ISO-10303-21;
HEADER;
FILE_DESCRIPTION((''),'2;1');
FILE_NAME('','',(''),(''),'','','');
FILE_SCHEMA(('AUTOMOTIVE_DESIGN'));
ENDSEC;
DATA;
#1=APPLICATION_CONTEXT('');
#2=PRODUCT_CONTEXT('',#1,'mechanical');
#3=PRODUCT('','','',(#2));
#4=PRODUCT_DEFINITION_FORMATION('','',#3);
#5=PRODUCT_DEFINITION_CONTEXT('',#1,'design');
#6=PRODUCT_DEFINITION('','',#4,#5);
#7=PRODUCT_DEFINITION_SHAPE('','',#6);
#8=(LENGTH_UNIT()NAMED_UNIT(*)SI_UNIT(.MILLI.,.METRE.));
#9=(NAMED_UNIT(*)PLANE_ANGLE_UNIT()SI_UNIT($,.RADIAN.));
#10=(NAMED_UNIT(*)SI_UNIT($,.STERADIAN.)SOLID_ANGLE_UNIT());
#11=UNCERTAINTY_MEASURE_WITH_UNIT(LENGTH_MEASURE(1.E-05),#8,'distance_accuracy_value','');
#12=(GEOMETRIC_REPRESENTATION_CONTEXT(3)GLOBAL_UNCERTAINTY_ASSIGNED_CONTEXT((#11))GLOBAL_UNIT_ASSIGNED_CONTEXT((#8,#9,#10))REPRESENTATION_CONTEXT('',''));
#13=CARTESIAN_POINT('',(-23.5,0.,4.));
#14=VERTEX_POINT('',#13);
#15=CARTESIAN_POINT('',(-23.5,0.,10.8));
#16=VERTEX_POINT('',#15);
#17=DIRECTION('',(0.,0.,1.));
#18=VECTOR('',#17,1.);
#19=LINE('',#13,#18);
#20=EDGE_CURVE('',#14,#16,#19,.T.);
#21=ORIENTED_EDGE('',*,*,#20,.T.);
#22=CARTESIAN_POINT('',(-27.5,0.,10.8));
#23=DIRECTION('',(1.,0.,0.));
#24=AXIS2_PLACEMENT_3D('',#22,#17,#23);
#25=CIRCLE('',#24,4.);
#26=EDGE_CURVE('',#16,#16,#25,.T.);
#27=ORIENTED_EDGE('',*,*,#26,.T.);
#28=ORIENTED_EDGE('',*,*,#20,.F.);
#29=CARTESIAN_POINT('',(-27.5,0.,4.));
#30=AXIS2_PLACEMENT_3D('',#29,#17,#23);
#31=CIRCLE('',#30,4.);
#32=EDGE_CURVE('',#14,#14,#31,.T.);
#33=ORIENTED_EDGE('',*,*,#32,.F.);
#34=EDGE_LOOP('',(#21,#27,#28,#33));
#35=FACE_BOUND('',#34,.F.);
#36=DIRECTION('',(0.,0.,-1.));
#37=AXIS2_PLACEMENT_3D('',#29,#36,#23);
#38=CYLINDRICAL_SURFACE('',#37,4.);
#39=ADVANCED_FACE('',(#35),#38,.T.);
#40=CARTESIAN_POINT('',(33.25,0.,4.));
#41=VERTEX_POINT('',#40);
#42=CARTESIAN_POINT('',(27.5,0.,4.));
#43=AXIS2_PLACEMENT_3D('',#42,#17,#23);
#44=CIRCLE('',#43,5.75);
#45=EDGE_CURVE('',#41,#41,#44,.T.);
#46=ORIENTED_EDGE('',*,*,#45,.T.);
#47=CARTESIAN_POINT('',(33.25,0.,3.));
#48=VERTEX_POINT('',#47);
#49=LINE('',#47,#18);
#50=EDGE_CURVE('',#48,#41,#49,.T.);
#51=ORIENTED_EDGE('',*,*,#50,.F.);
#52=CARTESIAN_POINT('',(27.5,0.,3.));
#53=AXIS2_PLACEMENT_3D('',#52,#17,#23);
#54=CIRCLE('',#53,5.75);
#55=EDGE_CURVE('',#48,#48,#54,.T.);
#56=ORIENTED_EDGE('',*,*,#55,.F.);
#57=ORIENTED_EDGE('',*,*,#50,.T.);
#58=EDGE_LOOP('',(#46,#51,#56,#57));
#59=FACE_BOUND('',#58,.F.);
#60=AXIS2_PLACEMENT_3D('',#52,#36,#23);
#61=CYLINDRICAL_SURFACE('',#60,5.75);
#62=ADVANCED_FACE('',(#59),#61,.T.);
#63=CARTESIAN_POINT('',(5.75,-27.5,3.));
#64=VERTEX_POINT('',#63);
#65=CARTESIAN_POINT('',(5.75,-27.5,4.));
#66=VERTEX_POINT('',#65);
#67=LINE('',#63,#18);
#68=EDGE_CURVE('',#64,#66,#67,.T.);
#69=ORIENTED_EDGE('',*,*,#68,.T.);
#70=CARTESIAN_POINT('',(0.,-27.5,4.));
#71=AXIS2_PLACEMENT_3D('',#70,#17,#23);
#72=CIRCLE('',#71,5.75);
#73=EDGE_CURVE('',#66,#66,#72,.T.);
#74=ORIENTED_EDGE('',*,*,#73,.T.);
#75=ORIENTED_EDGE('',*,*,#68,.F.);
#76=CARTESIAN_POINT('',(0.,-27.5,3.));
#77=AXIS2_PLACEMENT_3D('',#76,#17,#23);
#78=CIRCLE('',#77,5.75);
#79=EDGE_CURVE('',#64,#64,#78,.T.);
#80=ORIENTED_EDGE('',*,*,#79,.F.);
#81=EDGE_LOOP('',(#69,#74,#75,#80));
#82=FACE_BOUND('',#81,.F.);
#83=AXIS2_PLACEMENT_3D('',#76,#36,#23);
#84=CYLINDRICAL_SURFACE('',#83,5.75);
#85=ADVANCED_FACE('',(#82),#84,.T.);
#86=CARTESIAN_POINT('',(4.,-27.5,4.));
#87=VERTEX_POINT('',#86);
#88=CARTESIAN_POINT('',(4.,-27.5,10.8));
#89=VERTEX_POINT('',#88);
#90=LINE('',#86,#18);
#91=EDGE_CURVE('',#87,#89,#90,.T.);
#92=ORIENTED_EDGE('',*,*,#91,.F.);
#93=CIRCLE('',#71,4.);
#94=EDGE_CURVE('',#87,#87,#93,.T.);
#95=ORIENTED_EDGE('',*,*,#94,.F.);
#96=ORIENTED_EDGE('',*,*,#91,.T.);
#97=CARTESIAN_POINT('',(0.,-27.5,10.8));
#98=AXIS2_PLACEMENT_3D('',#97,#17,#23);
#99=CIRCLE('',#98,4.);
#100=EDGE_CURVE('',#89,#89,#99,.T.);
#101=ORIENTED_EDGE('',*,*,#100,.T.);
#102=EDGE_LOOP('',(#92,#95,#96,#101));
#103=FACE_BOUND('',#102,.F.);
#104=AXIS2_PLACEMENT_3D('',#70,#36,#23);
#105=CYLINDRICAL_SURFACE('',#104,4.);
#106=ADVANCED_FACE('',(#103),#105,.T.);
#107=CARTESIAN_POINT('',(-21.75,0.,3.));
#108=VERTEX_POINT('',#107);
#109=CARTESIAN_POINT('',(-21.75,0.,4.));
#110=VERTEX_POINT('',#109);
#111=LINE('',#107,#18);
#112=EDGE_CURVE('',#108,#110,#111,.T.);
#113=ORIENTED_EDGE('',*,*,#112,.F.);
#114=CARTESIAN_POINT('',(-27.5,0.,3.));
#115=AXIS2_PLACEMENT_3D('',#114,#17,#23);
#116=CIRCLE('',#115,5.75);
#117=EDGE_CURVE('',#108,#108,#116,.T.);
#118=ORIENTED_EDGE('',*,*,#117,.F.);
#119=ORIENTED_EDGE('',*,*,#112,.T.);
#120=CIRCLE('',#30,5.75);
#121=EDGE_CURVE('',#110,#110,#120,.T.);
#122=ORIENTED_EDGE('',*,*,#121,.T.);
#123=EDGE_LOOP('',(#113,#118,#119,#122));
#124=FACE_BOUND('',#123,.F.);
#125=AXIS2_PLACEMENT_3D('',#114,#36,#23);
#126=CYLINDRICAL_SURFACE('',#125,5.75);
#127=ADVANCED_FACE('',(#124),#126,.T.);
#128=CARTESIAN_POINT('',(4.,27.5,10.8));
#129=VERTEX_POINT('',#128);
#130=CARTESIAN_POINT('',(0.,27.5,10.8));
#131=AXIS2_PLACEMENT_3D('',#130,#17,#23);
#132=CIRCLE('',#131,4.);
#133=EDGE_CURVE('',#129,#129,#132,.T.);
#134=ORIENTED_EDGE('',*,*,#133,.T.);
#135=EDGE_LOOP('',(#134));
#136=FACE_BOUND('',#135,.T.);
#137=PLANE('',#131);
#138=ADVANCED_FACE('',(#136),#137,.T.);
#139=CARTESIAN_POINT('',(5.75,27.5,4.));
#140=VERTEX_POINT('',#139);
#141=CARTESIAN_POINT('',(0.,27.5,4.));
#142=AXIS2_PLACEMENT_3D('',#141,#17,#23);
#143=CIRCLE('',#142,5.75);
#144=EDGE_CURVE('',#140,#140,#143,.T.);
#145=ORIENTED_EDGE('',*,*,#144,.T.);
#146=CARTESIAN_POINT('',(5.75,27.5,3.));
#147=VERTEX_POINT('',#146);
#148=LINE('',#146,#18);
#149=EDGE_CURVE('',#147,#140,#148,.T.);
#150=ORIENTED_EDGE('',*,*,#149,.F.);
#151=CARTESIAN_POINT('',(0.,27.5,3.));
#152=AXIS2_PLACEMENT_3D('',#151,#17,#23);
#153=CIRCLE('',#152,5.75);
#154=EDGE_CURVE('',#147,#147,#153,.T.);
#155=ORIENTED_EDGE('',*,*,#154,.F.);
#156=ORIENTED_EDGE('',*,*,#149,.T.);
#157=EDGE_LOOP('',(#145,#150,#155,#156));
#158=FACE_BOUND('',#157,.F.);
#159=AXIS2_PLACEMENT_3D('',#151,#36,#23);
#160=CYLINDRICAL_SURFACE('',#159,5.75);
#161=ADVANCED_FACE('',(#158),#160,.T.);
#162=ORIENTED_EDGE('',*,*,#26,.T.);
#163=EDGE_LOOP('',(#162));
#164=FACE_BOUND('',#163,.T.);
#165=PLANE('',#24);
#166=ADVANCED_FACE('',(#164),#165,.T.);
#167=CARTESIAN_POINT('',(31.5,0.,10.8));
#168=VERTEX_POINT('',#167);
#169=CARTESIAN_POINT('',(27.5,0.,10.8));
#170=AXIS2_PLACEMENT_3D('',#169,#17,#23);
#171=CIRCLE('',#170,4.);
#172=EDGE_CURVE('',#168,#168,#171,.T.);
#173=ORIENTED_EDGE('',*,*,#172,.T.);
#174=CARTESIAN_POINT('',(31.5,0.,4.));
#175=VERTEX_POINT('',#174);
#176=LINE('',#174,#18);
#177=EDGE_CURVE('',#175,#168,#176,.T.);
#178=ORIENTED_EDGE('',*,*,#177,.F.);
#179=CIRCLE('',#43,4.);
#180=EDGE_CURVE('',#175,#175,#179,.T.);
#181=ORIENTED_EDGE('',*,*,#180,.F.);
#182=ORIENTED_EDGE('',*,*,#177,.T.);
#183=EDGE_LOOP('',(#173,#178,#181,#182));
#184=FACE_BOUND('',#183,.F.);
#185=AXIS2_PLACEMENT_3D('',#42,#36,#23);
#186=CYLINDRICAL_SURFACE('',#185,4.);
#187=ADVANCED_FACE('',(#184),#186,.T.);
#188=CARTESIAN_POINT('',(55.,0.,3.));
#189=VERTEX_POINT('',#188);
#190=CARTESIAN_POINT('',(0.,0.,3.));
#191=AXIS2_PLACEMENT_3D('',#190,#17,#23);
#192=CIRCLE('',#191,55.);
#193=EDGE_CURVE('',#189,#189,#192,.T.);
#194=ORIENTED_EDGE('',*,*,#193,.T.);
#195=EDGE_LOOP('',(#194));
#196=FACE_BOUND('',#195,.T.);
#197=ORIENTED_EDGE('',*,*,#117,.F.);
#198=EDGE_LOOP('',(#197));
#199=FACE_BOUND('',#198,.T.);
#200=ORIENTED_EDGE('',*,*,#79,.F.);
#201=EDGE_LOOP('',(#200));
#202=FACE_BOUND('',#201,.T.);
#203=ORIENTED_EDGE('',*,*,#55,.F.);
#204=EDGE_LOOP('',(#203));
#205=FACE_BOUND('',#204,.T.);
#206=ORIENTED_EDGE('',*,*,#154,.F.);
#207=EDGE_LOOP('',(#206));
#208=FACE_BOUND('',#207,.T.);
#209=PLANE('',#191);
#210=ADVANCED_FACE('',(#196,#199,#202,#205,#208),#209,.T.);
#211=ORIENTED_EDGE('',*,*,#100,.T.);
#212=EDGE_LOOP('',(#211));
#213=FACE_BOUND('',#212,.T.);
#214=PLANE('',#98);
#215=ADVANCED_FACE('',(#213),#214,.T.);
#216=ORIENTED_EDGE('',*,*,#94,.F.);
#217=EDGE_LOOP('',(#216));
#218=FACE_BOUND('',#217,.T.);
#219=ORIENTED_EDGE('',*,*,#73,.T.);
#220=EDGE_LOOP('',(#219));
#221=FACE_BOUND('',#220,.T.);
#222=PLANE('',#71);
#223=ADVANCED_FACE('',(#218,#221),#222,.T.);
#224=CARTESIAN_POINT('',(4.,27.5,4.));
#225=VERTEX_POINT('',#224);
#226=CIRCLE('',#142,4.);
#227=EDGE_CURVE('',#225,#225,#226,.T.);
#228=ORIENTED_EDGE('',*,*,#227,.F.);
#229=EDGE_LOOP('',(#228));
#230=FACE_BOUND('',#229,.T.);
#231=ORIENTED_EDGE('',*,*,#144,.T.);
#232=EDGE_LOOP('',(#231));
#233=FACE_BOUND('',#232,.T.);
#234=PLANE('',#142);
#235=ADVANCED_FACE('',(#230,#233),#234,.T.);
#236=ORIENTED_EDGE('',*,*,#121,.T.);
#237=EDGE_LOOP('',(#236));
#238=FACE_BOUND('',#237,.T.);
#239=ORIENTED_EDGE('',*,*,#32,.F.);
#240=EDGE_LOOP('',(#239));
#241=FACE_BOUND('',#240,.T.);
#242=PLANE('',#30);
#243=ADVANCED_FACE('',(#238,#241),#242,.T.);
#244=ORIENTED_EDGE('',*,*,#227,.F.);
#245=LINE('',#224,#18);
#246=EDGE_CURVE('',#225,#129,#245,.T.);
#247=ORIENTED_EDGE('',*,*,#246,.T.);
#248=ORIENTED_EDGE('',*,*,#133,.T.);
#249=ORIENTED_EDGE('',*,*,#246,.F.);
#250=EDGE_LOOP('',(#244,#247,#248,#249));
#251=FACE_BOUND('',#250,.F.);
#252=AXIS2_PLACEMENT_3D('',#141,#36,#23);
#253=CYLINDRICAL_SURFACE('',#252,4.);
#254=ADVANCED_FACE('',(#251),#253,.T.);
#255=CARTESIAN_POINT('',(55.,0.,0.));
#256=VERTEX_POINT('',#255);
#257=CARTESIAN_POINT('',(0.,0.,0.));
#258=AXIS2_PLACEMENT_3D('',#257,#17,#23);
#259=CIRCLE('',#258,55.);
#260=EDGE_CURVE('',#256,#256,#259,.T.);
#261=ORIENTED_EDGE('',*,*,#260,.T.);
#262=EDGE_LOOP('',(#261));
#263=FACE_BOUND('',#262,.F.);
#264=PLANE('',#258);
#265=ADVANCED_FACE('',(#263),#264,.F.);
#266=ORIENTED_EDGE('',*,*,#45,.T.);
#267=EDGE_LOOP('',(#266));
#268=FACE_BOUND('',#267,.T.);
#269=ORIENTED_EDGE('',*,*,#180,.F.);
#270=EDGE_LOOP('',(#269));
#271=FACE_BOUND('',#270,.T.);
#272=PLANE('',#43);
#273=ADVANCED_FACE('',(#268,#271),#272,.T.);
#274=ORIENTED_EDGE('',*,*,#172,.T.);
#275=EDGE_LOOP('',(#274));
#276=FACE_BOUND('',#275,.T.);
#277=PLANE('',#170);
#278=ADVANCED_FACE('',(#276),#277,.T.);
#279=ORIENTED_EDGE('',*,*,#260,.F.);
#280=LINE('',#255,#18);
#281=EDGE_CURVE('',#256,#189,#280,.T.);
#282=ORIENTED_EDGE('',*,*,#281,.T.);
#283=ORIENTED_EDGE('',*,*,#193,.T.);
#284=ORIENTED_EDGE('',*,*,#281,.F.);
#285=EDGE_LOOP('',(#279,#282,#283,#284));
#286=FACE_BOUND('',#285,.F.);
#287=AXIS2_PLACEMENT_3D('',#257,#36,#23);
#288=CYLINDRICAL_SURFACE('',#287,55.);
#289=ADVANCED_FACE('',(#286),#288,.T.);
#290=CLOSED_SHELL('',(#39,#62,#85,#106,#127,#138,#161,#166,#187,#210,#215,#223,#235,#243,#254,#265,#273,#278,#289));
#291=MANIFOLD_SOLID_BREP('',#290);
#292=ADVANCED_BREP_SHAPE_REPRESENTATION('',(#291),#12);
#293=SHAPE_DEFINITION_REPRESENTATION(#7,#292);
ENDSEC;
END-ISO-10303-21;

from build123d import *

# Parameters (mm, degrees)
F0_R      = 55
F1_DEPTH  = 3
F2_R      = 5.75
F3_DEPTH  = 1
F5_R      = 4
F6_DEPTH  = 6.8
F4_R      = 4
F7_DEPTH  = 6.8
F8_R      = 4
F9_DEPTH  = 6.8
F10_R     = 4
F11_DEPTH = 6.8


# Not quite as in the source:
# - a feature of the source that left no trace in its solid (it failed there, or was rolled back) is left out


with BuildPart() as f1:
    # F0 (on Top) → F1 (new body)
    with BuildSketch(Plane.XY):
        Circle(F0_R)
    extrude(amount=F1_DEPTH)

    # F2 (on face) → F3 (join)
    with BuildSketch(Plane.XY.offset(3)):
        with Locations((-27.5, 0)):
            Circle(F2_R)
        with Locations((27.5, 0)):
            Circle(F2_R)
        with Locations((0, 27.5)):
            Circle(F2_R)
        with Locations((0, -27.5)):
            Circle(F2_R)
    extrude(amount=F3_DEPTH)

    # F5 (on face) → F6 (join)
    with BuildSketch(Plane.XY.offset(4)):
        with Locations((27.5, 0)):
            Circle(F5_R)
    extrude(amount=F6_DEPTH)

    # F4 (on face) → F7 (join)
    with BuildSketch(Plane.XY.offset(4)):
        with Locations((-27.5, 0)):
            Circle(F4_R)
    extrude(amount=F7_DEPTH)

    # F8 (on face) → F9 (join)
    with BuildSketch(Plane.XY.offset(4)):
        with Locations((0, 27.5)):
            Circle(F8_R)
    extrude(amount=F9_DEPTH)

    # F10 (on face) → F11 (join)
    with BuildSketch(Plane.XY.offset(4)):
        with Locations((0, -27.5)):
            Circle(F10_R)
    extrude(amount=F11_DEPTH)


solid = f1.part
